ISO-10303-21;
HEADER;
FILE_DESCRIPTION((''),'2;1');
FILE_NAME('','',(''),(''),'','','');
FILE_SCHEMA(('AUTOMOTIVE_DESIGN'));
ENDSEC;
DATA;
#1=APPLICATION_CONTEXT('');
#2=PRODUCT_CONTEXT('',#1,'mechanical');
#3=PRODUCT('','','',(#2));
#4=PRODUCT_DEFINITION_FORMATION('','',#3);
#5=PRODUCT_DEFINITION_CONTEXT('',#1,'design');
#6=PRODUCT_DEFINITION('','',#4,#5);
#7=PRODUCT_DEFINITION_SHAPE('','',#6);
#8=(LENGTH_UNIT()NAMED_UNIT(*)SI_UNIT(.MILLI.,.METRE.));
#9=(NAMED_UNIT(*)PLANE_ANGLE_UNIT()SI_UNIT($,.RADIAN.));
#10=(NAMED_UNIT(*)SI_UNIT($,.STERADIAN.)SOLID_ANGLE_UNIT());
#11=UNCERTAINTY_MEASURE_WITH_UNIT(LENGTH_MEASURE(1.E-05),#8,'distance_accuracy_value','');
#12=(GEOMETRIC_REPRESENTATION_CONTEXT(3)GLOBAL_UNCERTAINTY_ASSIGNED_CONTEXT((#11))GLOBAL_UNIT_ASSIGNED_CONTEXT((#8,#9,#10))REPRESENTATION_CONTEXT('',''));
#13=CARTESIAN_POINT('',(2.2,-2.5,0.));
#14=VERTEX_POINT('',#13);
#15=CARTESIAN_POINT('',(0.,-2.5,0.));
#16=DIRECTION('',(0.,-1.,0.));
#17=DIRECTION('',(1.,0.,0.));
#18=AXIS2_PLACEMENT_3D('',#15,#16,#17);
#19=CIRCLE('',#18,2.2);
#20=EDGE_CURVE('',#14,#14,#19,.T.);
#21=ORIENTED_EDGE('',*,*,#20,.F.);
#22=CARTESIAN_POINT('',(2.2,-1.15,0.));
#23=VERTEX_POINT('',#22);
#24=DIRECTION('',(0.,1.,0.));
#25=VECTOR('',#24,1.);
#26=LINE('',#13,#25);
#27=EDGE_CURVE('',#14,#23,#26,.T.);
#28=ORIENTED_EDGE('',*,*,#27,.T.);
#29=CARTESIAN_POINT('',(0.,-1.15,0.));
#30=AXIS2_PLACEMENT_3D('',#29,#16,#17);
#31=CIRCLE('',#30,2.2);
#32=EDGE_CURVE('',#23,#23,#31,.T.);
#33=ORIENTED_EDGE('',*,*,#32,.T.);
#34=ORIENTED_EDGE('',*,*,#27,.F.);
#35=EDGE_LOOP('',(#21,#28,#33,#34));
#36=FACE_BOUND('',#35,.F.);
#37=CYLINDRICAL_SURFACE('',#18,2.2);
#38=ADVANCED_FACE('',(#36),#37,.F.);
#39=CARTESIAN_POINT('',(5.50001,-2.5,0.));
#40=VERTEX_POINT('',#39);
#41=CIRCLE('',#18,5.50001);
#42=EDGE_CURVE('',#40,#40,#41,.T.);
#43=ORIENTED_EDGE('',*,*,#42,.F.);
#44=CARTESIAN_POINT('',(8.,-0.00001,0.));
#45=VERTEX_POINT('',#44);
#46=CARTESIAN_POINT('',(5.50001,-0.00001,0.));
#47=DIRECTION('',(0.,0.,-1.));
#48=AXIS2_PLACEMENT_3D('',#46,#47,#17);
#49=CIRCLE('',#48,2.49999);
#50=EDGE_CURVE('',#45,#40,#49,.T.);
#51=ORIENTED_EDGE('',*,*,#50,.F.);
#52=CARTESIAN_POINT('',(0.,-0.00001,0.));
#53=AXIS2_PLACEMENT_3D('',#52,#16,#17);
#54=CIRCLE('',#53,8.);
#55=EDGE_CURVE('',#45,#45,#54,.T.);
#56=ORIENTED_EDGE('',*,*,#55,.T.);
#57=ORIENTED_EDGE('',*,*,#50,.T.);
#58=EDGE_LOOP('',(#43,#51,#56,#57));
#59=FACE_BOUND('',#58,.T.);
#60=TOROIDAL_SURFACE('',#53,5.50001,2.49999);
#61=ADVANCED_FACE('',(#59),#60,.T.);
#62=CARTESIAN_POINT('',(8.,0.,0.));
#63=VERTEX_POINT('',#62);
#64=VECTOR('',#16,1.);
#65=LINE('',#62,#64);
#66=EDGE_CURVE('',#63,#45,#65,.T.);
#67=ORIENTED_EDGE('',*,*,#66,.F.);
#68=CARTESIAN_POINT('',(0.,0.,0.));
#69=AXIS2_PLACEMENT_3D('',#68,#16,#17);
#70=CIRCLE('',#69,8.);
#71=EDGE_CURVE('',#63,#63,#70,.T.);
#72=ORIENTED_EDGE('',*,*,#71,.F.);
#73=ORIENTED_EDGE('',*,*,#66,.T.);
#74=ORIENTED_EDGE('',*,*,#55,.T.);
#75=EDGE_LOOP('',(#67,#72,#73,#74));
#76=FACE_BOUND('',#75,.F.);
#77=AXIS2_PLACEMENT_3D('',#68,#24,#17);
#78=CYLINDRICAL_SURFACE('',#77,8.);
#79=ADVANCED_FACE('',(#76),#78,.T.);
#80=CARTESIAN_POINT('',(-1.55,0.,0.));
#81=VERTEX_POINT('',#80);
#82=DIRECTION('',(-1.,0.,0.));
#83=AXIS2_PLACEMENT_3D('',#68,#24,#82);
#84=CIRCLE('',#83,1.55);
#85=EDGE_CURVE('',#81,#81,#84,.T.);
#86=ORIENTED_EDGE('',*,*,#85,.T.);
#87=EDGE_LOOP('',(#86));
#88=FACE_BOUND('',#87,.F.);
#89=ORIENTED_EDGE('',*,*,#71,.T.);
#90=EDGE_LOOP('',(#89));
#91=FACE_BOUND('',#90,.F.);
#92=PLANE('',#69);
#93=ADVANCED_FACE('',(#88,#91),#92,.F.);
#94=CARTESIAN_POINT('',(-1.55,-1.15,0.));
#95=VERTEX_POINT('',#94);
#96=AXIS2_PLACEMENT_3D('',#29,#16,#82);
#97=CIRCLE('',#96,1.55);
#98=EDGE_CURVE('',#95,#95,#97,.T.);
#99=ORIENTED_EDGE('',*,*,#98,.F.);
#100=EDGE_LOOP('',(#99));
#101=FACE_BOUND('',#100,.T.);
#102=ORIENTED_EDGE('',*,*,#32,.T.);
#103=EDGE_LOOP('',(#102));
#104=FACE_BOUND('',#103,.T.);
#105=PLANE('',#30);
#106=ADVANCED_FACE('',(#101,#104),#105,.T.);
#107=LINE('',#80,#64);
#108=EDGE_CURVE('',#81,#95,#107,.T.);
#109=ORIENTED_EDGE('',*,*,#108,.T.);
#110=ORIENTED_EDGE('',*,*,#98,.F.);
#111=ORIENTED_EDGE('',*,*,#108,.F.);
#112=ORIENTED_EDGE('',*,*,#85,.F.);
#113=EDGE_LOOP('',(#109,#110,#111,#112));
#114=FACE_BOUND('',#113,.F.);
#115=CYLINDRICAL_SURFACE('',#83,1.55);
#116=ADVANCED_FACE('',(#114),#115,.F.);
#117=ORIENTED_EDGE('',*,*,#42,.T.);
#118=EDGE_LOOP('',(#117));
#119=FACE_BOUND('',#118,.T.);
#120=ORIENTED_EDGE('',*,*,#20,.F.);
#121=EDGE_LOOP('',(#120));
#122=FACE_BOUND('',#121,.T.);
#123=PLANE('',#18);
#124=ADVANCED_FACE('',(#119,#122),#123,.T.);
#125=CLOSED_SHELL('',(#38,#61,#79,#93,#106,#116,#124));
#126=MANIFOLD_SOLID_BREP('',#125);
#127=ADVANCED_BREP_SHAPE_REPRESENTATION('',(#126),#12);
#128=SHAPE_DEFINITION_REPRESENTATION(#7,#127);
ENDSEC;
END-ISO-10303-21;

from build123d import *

# Parameters (mm, degrees)
F0_R     = 8
F1_DEPTH = 2.5
F2_R     = 2.49999
F3_R     = 1.55
F4_DEPTH = 25
F5_R     = 2.2
F5_R_2   = 1.55
F6_DEPTH = 1.35


# Not quite as in the source:
# - a fillet or chamfer is up to 0.001 mm smaller than in the source, because OpenCascade refuses the exact size


with BuildPart() as f1:
    # F0 (on Front) → F1 (new body)
    with BuildSketch(Plane.XZ):
        Circle(F0_R)
    extrude(amount=F1_DEPTH)

    # F2 (radius 2.5 in the source; OpenCascade refuses exactly that, so slightly less here)
    f2_edges = [f1.edges().sort_by_distance(p)[0] for p in [
        (-8, -2.5, 0),
    ]]
    fillet(f2_edges, radius=F2_R)

    # F3 (on face) → F4 (cut)
    with BuildSketch(Plane(origin=(0, 0, 0), x_dir=(-1, 0, 0), z_dir=(0, 1, 0))):
        Circle(F3_R)
    extrude(amount=-F4_DEPTH, mode=Mode.SUBTRACT)

    # F5 (on face) → F6 (cut)
    with BuildSketch(Plane.XZ.offset(2.5)):
        Circle(F5_R)
        Circle(F5_R_2, mode=Mode.SUBTRACT)
    extrude(amount=-F6_DEPTH, mode=Mode.SUBTRACT)


solid = f1.part
